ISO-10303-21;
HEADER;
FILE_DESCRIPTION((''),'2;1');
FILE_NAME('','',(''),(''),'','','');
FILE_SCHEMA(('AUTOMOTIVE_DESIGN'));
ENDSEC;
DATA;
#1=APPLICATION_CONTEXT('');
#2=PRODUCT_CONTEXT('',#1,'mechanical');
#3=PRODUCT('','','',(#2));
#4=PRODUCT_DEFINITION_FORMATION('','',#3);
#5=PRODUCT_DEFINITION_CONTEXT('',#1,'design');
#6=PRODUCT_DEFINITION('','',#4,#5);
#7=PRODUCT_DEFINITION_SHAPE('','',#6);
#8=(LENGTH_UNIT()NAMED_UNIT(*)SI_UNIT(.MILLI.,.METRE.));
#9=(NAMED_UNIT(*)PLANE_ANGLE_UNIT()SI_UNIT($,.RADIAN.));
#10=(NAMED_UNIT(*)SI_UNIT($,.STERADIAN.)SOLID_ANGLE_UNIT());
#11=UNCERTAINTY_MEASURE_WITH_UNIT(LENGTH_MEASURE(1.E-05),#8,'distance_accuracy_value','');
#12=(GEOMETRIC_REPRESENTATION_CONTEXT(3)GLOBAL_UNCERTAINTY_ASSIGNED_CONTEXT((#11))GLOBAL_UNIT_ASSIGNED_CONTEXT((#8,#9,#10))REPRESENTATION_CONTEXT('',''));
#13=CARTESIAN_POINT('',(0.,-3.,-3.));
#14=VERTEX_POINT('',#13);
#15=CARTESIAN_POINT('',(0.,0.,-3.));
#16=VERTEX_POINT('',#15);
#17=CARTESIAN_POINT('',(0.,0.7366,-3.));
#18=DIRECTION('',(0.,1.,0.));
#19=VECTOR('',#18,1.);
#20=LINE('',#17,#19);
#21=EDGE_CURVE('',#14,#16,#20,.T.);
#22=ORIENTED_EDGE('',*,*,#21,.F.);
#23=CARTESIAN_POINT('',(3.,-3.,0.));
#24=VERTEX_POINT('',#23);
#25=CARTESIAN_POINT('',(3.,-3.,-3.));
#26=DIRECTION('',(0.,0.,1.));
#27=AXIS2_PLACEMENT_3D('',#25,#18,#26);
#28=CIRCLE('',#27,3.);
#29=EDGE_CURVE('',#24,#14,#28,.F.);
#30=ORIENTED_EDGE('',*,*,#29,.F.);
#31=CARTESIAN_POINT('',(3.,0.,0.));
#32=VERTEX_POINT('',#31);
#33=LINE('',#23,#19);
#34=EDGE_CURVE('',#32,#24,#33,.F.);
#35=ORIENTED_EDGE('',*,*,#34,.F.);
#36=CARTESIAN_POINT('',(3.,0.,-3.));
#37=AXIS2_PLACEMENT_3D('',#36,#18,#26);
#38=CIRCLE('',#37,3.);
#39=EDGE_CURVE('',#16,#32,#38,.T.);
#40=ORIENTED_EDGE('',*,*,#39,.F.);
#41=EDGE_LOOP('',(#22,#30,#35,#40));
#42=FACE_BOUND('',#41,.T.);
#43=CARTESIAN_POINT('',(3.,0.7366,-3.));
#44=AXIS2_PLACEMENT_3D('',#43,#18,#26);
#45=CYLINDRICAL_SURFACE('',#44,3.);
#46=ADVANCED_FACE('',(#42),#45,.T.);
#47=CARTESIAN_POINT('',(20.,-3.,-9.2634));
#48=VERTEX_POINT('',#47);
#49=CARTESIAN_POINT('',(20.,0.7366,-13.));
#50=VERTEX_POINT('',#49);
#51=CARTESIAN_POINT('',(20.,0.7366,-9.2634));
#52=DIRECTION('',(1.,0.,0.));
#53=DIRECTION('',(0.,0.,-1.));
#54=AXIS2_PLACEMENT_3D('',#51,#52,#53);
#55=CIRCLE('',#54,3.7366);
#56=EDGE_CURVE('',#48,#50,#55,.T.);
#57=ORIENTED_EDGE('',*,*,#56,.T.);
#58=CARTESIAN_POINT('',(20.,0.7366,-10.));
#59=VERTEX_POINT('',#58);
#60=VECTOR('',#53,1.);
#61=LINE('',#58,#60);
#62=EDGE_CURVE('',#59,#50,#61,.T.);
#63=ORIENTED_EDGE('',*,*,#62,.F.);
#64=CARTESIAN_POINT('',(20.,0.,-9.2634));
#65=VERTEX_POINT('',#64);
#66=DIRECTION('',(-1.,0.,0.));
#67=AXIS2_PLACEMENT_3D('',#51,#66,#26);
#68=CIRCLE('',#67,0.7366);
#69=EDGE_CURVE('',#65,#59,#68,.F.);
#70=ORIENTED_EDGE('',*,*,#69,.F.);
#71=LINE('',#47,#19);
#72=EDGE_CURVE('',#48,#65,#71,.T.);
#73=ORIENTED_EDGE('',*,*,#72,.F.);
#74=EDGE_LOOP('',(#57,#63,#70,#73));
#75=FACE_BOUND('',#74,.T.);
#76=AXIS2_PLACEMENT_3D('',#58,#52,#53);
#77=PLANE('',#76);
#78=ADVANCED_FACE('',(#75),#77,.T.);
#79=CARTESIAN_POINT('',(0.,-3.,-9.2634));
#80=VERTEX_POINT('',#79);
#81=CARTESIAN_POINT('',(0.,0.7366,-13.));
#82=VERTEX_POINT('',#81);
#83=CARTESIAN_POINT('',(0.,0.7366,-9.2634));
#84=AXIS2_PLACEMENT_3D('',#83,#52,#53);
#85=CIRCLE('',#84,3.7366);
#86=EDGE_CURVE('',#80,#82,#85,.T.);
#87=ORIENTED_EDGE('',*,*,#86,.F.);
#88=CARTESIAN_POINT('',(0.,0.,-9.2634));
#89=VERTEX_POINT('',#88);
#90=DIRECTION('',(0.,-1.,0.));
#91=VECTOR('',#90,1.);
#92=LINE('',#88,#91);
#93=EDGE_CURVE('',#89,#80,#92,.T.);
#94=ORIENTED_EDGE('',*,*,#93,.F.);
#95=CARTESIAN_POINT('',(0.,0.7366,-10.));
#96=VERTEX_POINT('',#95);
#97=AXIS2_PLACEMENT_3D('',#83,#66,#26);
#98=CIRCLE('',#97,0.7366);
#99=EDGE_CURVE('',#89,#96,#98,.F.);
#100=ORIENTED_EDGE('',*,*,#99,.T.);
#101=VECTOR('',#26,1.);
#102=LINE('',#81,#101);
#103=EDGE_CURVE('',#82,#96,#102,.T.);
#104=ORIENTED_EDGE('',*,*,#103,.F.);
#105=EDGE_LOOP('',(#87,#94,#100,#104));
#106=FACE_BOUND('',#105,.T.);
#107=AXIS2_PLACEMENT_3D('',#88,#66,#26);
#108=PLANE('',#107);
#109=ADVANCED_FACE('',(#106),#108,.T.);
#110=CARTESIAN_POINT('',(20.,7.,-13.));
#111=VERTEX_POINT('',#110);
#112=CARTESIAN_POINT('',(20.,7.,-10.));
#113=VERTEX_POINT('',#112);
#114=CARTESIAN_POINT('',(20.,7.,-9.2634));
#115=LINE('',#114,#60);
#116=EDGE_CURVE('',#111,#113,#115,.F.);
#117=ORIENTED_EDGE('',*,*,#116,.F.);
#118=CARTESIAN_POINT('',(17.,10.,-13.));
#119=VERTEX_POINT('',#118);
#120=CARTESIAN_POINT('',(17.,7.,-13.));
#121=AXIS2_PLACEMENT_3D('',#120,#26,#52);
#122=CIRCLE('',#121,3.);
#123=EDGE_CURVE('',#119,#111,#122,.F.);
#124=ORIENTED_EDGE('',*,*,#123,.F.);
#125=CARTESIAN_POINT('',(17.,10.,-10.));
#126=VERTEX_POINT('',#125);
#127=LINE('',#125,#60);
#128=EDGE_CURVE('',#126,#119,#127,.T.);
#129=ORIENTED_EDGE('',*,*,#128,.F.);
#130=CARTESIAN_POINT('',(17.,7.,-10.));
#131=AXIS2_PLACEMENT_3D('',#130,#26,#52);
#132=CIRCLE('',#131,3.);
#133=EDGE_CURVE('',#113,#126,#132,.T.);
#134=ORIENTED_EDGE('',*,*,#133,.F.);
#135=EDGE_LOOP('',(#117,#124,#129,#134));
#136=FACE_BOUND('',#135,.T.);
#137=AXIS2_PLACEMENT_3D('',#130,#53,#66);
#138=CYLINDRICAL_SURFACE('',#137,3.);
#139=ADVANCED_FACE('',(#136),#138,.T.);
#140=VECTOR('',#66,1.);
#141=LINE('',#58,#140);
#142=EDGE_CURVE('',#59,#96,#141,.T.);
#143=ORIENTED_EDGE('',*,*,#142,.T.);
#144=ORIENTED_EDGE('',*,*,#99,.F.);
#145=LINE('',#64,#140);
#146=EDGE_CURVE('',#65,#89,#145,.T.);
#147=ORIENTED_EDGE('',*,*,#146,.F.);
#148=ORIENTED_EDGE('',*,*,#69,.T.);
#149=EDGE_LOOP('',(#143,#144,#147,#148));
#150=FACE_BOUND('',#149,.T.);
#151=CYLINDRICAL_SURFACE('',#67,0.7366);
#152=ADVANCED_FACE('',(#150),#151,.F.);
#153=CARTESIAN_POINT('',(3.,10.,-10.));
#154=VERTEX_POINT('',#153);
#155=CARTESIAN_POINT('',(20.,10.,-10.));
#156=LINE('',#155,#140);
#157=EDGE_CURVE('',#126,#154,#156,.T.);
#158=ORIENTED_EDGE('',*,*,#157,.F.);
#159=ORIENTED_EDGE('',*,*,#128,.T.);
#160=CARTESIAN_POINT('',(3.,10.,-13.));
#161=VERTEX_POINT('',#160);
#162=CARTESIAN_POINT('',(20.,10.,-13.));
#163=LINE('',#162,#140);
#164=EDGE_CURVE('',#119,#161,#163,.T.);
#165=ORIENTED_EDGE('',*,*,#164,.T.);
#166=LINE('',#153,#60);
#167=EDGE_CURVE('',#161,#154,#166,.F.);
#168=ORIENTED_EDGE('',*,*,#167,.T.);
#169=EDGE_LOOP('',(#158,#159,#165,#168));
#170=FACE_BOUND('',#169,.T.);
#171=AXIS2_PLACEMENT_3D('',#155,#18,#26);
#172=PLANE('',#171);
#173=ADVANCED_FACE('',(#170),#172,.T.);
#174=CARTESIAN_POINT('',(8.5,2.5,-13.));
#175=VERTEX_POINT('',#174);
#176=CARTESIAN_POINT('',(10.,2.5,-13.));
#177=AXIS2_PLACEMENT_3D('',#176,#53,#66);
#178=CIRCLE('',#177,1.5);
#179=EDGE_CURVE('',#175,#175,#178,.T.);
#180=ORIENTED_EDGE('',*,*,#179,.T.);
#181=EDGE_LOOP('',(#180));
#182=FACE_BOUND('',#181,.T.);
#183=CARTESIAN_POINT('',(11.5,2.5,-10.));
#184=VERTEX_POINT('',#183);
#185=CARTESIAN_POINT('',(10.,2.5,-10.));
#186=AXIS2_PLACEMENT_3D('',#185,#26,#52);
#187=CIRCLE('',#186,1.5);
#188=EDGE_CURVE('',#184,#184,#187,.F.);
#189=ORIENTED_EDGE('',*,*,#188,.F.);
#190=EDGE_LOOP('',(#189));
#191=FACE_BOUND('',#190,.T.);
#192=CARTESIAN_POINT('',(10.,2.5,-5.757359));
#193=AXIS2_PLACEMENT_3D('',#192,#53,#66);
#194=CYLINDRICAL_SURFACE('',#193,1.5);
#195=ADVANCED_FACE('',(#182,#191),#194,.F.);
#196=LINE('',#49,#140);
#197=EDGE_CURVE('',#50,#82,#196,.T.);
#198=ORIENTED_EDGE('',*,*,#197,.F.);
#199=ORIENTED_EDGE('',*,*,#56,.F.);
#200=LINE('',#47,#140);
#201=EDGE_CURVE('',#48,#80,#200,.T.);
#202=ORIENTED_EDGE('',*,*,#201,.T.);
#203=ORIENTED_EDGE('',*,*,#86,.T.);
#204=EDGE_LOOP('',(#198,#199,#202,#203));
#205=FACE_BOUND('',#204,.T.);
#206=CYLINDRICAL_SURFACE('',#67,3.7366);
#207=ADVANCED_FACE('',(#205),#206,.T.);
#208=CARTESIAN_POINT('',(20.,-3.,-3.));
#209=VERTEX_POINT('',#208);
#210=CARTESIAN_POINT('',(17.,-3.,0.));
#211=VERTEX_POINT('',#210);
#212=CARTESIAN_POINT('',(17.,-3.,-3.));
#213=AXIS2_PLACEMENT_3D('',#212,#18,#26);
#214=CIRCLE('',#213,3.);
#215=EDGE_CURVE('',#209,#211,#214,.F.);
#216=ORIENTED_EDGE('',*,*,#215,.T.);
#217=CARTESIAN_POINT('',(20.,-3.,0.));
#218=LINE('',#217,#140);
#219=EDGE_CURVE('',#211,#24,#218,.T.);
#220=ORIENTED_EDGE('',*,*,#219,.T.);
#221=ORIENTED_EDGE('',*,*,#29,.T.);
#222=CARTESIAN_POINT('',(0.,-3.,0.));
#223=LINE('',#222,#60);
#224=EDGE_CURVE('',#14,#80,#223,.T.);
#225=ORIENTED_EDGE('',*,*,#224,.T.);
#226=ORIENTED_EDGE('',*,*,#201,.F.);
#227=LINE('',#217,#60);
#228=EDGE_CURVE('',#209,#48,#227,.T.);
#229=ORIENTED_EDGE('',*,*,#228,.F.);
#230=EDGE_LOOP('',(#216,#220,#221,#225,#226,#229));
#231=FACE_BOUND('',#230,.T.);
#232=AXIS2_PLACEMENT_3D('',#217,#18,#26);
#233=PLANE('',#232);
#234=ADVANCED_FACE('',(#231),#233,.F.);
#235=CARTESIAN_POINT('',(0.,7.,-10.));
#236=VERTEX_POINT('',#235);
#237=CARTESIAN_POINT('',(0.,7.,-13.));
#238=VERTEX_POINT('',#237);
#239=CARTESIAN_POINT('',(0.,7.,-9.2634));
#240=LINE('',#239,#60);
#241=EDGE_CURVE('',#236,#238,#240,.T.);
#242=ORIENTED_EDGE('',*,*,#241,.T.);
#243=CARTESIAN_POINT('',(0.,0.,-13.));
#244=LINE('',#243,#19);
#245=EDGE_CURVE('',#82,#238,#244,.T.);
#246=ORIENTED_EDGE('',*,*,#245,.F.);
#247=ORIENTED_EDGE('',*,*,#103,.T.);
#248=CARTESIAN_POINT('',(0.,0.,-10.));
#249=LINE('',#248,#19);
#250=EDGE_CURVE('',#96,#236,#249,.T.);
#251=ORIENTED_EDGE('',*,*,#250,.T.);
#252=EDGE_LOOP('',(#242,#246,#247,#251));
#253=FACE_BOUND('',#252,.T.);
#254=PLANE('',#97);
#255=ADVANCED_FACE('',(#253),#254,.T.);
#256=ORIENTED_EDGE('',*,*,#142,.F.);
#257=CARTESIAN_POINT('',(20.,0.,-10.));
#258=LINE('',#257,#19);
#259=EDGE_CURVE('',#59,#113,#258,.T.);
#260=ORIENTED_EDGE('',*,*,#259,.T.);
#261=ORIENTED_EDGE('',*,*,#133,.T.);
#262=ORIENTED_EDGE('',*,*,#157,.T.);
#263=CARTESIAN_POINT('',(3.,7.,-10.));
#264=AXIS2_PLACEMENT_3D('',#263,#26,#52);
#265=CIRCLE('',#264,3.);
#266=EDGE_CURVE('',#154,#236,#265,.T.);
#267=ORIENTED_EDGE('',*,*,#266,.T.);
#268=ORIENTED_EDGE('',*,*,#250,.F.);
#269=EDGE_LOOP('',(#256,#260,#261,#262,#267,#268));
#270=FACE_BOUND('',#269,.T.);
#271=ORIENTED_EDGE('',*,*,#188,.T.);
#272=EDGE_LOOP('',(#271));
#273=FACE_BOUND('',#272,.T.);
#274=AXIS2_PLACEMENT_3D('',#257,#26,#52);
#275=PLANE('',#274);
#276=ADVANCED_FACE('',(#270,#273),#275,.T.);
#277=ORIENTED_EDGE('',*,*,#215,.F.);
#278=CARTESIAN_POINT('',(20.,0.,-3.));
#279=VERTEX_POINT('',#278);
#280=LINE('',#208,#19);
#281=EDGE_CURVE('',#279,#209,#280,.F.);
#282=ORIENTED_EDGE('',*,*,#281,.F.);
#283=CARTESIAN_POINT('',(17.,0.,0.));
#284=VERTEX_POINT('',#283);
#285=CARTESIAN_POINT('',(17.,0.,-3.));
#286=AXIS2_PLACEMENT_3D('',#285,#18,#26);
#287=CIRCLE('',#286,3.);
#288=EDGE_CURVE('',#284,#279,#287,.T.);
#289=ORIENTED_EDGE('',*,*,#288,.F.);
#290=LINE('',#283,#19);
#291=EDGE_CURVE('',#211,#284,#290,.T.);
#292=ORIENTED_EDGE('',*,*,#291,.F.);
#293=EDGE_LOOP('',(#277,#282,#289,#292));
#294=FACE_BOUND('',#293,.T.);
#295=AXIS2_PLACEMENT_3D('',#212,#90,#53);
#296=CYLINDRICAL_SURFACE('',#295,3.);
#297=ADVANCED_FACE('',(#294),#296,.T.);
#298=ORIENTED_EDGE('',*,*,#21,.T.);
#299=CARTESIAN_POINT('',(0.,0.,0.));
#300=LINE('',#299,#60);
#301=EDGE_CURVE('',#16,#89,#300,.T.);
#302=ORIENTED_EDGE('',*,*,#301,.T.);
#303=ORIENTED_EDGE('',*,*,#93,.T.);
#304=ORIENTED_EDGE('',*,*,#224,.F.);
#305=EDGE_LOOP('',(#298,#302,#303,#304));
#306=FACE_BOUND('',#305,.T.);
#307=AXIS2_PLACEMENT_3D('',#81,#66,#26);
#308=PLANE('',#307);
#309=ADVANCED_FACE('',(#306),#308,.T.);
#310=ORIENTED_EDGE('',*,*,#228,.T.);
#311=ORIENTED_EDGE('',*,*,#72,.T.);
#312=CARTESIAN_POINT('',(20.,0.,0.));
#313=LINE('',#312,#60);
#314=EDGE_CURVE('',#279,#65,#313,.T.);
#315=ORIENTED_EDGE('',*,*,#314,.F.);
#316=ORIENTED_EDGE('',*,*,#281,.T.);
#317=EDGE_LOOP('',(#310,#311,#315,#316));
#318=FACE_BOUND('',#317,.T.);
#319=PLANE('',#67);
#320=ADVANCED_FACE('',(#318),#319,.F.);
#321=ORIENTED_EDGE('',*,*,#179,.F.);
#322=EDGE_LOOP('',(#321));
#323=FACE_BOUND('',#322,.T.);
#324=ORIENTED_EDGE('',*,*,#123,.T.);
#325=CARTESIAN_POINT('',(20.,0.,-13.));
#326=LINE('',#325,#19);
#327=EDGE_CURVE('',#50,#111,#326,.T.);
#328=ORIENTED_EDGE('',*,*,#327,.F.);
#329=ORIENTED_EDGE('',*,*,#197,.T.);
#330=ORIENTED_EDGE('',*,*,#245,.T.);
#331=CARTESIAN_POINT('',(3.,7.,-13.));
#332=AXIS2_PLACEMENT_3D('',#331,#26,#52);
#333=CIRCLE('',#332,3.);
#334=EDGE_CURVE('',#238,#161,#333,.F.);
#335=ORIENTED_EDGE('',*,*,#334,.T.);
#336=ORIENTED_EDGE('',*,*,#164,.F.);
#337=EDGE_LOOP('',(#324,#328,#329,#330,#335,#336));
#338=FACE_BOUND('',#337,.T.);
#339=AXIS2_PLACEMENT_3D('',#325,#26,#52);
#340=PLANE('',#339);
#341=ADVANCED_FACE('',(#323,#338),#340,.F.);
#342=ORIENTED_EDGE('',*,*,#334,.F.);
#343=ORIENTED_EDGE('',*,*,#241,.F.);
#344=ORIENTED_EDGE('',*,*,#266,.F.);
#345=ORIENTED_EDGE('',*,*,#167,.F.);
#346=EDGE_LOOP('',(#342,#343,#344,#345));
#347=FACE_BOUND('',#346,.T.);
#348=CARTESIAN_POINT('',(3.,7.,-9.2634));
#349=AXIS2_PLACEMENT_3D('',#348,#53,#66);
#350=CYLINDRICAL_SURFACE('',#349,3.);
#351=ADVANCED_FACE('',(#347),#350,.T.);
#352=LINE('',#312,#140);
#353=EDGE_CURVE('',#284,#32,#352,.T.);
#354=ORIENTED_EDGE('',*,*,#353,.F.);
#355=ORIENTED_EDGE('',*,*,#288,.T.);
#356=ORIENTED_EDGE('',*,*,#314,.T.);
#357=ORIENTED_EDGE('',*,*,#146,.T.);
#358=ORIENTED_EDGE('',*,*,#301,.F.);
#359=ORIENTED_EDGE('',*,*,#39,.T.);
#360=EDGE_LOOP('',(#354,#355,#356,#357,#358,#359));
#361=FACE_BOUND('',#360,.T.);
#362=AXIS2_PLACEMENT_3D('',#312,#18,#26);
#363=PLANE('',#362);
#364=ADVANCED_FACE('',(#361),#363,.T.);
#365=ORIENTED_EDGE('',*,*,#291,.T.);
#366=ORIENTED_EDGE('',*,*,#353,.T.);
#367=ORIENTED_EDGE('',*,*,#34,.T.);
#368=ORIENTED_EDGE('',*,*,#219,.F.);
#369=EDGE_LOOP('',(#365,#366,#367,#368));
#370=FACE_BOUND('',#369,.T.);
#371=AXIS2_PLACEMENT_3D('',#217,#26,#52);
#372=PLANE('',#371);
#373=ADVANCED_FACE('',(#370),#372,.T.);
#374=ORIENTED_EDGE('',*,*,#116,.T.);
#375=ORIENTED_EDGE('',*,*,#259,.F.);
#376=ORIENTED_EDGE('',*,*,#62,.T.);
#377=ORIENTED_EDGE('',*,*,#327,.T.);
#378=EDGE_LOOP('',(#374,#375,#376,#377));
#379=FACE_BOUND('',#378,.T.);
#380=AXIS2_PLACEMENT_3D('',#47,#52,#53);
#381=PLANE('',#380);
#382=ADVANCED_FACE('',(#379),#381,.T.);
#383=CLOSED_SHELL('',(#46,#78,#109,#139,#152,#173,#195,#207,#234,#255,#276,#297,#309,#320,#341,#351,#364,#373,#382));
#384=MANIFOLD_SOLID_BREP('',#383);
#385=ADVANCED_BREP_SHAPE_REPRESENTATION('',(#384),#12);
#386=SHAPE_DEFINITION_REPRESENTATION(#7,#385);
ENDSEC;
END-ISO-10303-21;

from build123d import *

# Parameters (mm, degrees)
BASE_FLANGE1_DEPTH = 20
FILLET1_R          = 3
SKETCH2_R          = 1.5
CUT_EXTRUDE1_DEPTH = 3


# Sheet-metal steps are written as plain solids
with BuildPart() as part:
    # Sketch1 → Base-Flange1 (new body)
    with BuildSketch(Plane(origin=(0, 0, 0), x_dir=(0, 0, -1), z_dir=(1, 0, 0))):
        with BuildLine():
            Line((0, 0), (9.2634, 0))
            ThreePointArc((9.2634, 0), (9.784254855, 0.215745145), (10, 0.7366))
            Line((10, 0.7366), (10, 10))
            Line((10, 10), (13, 10))
            Line((13, 10), (13, 0.7366))
            ThreePointArc((13, 0.7366), (11.905575199, -1.905575199), (9.2634, -3))
            Line((9.2634, -3), (0, -3))
            Line((0, -3), (0, 0))
        make_face()
    extrude(amount=BASE_FLANGE1_DEPTH)

    # Fillet1
    fillet1_edges = [part.edges().sort_by_distance(p)[0] for p in [
        (20, -1.5, 0),
        (20, 10, -11.5),
        (0, -1.5, 0),
        (0, 10, -11.5),
    ]]
    fillet(fillet1_edges, radius=FILLET1_R)

    # Sketch2 → Cut-Extrude1 (cut)
    with BuildSketch(Plane(origin=(0, 0, -13), x_dir=(-1, 0, 0), z_dir=(0, 0, -1))):
        with Locations((-10, 2.5)):
            Circle(SKETCH2_R)
    extrude(amount=-CUT_EXTRUDE1_DEPTH, mode=Mode.SUBTRACT)


solid = part.part
